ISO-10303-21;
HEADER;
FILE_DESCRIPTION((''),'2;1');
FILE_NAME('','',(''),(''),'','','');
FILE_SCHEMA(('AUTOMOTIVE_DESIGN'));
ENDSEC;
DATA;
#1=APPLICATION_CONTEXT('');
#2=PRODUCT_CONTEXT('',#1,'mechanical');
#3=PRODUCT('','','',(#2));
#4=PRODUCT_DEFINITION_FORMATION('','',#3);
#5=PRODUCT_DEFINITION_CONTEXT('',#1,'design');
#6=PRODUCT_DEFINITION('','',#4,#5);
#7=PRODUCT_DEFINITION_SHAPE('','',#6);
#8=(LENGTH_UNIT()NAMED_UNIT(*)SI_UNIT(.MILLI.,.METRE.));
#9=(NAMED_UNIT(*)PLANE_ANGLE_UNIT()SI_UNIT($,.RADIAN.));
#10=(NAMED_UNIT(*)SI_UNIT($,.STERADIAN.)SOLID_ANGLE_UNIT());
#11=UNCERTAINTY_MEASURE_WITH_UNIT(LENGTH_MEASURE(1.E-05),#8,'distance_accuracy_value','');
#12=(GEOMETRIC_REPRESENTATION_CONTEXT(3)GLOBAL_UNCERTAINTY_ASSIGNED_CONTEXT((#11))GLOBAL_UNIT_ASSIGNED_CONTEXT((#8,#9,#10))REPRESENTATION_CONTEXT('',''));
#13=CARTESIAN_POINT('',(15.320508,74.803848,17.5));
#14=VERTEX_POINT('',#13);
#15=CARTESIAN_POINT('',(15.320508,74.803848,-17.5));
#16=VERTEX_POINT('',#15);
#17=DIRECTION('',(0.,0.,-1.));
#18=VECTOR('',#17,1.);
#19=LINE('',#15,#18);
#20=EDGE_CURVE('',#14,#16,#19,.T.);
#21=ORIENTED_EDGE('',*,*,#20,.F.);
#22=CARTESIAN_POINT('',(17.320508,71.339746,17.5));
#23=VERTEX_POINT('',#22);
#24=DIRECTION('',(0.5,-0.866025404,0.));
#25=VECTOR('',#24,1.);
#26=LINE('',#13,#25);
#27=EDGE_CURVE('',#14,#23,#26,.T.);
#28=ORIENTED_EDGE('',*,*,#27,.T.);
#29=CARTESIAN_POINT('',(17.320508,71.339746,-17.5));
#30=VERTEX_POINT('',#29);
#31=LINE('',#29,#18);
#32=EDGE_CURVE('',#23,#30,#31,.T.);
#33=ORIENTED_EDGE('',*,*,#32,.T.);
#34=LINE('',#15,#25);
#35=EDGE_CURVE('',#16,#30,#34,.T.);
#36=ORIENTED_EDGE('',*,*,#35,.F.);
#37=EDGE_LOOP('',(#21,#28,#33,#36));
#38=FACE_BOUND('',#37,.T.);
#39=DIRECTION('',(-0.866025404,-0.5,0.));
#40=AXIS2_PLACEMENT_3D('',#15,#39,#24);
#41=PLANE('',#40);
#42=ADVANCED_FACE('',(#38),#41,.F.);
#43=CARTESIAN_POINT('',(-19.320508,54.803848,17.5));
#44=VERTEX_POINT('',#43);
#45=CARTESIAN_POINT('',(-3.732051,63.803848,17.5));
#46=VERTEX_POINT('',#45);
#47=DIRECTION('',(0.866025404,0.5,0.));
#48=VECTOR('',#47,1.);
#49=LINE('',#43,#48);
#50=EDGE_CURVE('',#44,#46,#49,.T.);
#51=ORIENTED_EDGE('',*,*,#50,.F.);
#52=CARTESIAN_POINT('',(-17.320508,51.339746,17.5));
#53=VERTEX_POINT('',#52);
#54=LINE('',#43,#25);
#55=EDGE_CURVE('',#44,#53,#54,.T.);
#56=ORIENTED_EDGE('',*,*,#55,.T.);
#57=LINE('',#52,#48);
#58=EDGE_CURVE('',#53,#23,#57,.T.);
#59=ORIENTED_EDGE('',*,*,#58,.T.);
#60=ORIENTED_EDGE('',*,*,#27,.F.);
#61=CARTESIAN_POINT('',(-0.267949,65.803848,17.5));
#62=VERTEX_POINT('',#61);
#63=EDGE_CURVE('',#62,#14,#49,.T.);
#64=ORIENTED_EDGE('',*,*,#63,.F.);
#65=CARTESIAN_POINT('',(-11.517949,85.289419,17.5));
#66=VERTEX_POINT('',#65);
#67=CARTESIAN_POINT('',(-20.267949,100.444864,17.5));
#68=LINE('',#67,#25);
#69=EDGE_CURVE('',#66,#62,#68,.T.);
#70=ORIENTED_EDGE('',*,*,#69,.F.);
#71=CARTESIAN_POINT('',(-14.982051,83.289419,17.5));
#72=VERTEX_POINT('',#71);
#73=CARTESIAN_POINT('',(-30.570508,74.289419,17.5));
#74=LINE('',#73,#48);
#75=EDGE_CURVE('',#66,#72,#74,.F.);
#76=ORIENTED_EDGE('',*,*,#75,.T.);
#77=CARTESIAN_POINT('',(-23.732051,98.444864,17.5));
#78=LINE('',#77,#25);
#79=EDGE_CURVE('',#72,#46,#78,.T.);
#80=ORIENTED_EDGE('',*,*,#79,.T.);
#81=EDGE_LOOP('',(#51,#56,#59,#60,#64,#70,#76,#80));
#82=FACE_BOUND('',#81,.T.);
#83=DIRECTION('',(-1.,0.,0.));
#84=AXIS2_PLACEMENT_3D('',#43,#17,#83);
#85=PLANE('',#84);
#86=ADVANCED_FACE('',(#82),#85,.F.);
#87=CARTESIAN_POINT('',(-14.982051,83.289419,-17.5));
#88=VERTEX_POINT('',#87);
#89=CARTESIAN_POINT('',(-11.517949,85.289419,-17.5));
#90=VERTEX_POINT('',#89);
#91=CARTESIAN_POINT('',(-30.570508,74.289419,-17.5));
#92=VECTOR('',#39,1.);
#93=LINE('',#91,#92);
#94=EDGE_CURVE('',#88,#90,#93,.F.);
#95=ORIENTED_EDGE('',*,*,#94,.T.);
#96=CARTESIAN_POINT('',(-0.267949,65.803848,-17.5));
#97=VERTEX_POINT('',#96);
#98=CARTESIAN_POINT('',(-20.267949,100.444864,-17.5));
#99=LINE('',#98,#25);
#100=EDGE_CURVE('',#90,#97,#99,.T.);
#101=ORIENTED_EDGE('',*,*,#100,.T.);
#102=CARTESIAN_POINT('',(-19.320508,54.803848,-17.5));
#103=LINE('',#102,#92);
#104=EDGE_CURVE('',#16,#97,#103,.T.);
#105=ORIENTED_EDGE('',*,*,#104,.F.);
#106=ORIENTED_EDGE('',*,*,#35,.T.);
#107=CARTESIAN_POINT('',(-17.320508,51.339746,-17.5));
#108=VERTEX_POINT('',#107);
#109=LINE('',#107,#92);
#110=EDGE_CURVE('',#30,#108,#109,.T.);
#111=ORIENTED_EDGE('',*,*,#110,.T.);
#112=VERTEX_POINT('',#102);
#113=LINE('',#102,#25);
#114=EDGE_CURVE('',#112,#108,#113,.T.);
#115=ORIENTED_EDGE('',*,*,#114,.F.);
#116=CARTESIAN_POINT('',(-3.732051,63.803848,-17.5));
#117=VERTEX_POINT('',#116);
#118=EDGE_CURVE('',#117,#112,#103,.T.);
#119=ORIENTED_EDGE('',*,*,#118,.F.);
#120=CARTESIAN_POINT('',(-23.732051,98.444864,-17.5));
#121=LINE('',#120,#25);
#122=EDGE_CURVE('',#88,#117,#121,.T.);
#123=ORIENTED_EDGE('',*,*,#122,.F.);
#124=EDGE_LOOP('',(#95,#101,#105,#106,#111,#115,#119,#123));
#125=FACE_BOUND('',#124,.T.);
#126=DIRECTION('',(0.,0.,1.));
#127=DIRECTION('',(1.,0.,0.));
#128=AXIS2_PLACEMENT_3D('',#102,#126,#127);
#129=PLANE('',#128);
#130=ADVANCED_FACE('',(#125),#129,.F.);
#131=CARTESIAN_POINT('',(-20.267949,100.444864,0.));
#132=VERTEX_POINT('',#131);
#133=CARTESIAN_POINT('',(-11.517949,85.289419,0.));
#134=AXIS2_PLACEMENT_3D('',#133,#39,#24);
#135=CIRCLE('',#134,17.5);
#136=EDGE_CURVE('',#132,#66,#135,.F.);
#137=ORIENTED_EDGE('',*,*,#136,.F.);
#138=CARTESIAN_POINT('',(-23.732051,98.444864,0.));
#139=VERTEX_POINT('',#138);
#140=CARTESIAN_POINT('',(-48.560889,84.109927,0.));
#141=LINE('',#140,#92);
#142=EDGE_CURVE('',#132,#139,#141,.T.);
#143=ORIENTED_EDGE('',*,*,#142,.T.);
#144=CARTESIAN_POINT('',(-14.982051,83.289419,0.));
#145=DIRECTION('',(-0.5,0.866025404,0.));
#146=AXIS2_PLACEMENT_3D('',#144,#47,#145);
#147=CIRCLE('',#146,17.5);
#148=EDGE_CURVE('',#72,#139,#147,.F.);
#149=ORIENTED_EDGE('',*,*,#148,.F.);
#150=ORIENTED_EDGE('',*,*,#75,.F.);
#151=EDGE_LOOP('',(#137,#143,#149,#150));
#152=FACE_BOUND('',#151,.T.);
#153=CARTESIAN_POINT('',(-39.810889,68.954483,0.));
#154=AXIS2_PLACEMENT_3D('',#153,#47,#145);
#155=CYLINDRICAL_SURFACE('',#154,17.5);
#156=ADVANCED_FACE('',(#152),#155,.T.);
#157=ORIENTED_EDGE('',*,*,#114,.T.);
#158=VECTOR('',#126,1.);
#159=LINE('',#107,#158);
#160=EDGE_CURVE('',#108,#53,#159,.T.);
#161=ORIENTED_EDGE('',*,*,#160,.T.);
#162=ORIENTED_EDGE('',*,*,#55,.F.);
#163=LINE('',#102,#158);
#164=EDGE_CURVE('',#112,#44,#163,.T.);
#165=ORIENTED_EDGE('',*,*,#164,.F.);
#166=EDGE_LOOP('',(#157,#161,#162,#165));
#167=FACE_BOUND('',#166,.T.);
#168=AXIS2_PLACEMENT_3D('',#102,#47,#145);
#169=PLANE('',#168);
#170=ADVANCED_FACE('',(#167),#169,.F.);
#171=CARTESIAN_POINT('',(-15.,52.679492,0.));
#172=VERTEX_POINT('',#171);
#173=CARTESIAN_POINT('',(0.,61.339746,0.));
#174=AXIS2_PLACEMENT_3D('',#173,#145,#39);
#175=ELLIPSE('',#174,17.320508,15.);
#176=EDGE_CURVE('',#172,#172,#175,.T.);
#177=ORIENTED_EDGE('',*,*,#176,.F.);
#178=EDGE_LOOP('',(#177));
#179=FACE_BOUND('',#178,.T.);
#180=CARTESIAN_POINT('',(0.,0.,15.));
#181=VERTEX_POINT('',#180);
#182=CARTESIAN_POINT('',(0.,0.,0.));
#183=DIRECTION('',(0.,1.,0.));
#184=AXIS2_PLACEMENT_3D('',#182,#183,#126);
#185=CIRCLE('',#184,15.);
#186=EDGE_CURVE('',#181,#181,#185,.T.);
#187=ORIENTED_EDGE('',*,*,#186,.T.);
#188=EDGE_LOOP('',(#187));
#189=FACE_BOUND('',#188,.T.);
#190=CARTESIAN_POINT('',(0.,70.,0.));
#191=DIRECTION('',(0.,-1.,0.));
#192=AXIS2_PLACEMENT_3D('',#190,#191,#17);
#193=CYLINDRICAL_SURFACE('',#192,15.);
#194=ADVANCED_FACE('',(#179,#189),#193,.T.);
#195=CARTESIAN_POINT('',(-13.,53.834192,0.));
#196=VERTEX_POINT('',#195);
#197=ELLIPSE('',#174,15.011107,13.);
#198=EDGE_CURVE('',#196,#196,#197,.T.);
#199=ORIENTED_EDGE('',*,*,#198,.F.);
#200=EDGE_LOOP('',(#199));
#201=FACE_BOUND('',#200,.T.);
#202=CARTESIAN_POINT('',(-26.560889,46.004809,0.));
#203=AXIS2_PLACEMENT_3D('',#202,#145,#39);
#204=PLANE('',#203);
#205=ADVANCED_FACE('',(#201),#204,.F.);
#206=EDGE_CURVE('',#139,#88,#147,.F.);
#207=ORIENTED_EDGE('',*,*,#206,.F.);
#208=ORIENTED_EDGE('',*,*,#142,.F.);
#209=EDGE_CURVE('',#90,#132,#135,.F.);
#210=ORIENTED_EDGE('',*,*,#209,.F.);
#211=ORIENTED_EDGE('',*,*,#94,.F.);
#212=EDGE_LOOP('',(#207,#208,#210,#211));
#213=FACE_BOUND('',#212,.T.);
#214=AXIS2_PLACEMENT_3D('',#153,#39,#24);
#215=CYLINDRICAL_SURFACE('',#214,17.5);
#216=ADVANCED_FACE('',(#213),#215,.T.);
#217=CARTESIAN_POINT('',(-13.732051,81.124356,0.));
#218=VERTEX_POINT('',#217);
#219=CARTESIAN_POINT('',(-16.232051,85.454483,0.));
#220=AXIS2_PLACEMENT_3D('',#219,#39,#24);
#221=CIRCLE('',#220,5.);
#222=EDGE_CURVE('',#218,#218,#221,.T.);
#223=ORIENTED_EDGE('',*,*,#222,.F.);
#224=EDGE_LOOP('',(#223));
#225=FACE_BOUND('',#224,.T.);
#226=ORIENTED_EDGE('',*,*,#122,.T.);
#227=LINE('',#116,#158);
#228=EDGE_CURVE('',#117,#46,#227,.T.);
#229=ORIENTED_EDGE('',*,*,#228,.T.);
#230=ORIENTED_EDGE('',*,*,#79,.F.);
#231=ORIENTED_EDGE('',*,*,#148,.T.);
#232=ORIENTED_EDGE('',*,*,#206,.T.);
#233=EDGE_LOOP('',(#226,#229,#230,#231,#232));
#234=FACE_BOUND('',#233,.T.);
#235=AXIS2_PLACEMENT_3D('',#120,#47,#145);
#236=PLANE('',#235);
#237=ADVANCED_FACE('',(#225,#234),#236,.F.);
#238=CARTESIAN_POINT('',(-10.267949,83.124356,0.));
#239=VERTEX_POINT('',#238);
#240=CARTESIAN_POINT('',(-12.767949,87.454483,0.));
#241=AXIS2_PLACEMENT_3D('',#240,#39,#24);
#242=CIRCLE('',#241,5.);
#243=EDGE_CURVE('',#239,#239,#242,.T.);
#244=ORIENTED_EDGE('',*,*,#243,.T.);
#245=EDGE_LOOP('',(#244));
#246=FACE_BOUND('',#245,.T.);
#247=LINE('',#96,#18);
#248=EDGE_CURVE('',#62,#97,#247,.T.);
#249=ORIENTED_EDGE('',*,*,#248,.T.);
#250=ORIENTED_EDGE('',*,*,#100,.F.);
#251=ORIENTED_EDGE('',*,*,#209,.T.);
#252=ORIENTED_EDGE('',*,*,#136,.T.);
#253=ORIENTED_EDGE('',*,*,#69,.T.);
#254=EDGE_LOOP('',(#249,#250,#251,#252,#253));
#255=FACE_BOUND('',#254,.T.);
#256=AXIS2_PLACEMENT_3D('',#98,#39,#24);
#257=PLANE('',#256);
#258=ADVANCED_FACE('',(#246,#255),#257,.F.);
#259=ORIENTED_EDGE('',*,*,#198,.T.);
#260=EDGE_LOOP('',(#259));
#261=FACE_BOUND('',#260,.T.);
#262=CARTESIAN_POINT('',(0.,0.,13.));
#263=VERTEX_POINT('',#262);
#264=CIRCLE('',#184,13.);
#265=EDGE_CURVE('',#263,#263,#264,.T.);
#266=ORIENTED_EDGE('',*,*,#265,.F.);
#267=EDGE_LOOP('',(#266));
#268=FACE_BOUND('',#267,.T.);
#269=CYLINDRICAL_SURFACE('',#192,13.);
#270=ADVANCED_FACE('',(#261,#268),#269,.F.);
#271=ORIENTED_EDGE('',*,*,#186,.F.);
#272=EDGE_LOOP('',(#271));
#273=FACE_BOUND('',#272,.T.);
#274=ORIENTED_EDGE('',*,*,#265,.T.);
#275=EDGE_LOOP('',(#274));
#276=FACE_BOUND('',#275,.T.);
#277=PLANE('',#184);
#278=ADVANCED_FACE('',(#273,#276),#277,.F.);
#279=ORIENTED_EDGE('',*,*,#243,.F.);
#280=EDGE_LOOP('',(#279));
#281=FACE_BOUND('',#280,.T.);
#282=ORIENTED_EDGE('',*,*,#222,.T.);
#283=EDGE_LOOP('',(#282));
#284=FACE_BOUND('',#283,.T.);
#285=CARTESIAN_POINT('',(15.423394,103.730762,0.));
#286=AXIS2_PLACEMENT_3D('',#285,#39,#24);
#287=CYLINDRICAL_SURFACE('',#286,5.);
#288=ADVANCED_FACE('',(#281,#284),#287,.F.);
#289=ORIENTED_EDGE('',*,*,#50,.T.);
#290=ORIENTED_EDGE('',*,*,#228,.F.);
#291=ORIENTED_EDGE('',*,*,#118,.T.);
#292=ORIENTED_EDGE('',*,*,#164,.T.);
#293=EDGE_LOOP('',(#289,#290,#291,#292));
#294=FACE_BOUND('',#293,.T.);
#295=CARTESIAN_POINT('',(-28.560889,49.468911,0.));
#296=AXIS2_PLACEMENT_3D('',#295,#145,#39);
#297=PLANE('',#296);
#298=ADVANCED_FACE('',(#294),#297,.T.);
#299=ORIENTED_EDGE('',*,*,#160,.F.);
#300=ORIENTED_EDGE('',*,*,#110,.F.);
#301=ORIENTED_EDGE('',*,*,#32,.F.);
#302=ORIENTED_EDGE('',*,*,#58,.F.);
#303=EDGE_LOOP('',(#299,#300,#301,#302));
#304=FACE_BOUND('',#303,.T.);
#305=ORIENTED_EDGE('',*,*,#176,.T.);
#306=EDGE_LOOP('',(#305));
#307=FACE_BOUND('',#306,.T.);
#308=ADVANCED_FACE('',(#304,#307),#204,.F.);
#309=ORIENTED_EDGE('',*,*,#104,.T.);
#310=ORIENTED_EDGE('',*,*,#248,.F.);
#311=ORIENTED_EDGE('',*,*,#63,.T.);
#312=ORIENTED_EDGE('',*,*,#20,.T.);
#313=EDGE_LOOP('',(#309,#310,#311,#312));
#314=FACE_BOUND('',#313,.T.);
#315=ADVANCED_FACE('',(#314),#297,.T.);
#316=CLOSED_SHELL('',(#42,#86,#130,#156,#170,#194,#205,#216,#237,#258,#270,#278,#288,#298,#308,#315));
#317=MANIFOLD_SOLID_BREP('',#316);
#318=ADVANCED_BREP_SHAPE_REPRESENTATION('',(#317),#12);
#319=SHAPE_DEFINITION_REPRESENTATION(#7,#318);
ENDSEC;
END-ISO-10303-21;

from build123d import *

# Parameters (mm, degrees)
SKETCH2_R               = 15
SKETCH2_R_2             = 13
BOSS_EXTRUDE1_DEPTH     = 70
CUT_EXTRUDE1_DEPTH      = 74.143694192
CUT_EXTRUDE1_DEPTH_BACK = 74.143694192
SKETCH4_W               = 40
SKETCH4_H               = 35
BOSS_EXTRUDE2_DEPTH     = 4
SKETCH5_W               = 4
SKETCH5_H               = 35
BOSS_EXTRUDE4_DEPTH     = 40
SKETCH6_R               = 5
CUT_EXTRUDE2_DEPTH      = 101.39586407
FILLET3_R               = 17.5


with BuildPart() as part:
    # Sketch2 → Boss-Extrude1 (new body)
    with BuildSketch(Plane(origin=(0, 0, 0), x_dir=(1, 0, 0), z_dir=(0, 1, 0))):
        with Locations(Location((0, 0, 0), (0, 0, 270))):
            Circle(SKETCH2_R)
        with Locations(Location((0, 0, 0), (0, 0, 270))):
            Circle(SKETCH2_R_2, mode=Mode.SUBTRACT)
    extrude(amount=BOSS_EXTRUDE1_DEPTH)

    # Sketch3 → Cut-Extrude1 (cut, two sides: drawn at the far end of the back side and taken through both)
    with BuildSketch(Plane.XY.offset(-CUT_EXTRUDE1_DEPTH_BACK)):
        Polygon((-15, 52.679491924), (-15, 70), (15, 70), align=None)
    extrude(amount=CUT_EXTRUDE1_DEPTH + CUT_EXTRUDE1_DEPTH_BACK, mode=Mode.SUBTRACT)

    # Sketch4 → Boss-Extrude2 (add)
    with BuildSketch(Plane(origin=(-26.560889132, 46.004809472, 0), x_dir=(0.866025403784438, 0.5000000000000012, 0), z_dir=(-0.5000000000000012, 0.866025403784438, 0))):
        with Locations((30.669872981, 0)):
            Rectangle(SKETCH4_W, SKETCH4_H)
    extrude(amount=BOSS_EXTRUDE2_DEPTH)

    # Sketch5 → Boss-Extrude4 (add)
    with BuildSketch(Plane(origin=(-28.560889132, 49.468911087, 0), x_dir=(0.866025403784438, 0.5000000000000012, 0), z_dir=(-0.5000000000000011, 0.8660254037844379, 0))):
        with Locations((30.669872981, 0)):
            Rectangle(SKETCH5_W, SKETCH5_H)
    extrude(amount=BOSS_EXTRUDE4_DEPTH)

    # Sketch6 → Cut-Extrude2 (cut, through all)
    with BuildSketch(Plane(origin=(24.828838325, 14.334936491, 0), x_dir=(0, 0, 1), z_dir=(-0.8660254037844382, -0.5000000000000011, 0))):
        with Locations(Location((0, 82.121778265, 0), (0, 0, 270))):
            Circle(SKETCH6_R)
    extrude(amount=-CUT_EXTRUDE2_DEPTH, mode=Mode.SUBTRACT)

    # Fillet3
    fillet3_edges = [part.edges().sort_by_distance(p)[0] for p in [
        (-22, 99.444863729, 17.5),
        (-22, 99.444863729, -17.5),
    ]]
    fillet(fillet3_edges, radius=FILLET3_R - 0.0001)  # a hair under: the kernel refuses the full size


solid = part.part
